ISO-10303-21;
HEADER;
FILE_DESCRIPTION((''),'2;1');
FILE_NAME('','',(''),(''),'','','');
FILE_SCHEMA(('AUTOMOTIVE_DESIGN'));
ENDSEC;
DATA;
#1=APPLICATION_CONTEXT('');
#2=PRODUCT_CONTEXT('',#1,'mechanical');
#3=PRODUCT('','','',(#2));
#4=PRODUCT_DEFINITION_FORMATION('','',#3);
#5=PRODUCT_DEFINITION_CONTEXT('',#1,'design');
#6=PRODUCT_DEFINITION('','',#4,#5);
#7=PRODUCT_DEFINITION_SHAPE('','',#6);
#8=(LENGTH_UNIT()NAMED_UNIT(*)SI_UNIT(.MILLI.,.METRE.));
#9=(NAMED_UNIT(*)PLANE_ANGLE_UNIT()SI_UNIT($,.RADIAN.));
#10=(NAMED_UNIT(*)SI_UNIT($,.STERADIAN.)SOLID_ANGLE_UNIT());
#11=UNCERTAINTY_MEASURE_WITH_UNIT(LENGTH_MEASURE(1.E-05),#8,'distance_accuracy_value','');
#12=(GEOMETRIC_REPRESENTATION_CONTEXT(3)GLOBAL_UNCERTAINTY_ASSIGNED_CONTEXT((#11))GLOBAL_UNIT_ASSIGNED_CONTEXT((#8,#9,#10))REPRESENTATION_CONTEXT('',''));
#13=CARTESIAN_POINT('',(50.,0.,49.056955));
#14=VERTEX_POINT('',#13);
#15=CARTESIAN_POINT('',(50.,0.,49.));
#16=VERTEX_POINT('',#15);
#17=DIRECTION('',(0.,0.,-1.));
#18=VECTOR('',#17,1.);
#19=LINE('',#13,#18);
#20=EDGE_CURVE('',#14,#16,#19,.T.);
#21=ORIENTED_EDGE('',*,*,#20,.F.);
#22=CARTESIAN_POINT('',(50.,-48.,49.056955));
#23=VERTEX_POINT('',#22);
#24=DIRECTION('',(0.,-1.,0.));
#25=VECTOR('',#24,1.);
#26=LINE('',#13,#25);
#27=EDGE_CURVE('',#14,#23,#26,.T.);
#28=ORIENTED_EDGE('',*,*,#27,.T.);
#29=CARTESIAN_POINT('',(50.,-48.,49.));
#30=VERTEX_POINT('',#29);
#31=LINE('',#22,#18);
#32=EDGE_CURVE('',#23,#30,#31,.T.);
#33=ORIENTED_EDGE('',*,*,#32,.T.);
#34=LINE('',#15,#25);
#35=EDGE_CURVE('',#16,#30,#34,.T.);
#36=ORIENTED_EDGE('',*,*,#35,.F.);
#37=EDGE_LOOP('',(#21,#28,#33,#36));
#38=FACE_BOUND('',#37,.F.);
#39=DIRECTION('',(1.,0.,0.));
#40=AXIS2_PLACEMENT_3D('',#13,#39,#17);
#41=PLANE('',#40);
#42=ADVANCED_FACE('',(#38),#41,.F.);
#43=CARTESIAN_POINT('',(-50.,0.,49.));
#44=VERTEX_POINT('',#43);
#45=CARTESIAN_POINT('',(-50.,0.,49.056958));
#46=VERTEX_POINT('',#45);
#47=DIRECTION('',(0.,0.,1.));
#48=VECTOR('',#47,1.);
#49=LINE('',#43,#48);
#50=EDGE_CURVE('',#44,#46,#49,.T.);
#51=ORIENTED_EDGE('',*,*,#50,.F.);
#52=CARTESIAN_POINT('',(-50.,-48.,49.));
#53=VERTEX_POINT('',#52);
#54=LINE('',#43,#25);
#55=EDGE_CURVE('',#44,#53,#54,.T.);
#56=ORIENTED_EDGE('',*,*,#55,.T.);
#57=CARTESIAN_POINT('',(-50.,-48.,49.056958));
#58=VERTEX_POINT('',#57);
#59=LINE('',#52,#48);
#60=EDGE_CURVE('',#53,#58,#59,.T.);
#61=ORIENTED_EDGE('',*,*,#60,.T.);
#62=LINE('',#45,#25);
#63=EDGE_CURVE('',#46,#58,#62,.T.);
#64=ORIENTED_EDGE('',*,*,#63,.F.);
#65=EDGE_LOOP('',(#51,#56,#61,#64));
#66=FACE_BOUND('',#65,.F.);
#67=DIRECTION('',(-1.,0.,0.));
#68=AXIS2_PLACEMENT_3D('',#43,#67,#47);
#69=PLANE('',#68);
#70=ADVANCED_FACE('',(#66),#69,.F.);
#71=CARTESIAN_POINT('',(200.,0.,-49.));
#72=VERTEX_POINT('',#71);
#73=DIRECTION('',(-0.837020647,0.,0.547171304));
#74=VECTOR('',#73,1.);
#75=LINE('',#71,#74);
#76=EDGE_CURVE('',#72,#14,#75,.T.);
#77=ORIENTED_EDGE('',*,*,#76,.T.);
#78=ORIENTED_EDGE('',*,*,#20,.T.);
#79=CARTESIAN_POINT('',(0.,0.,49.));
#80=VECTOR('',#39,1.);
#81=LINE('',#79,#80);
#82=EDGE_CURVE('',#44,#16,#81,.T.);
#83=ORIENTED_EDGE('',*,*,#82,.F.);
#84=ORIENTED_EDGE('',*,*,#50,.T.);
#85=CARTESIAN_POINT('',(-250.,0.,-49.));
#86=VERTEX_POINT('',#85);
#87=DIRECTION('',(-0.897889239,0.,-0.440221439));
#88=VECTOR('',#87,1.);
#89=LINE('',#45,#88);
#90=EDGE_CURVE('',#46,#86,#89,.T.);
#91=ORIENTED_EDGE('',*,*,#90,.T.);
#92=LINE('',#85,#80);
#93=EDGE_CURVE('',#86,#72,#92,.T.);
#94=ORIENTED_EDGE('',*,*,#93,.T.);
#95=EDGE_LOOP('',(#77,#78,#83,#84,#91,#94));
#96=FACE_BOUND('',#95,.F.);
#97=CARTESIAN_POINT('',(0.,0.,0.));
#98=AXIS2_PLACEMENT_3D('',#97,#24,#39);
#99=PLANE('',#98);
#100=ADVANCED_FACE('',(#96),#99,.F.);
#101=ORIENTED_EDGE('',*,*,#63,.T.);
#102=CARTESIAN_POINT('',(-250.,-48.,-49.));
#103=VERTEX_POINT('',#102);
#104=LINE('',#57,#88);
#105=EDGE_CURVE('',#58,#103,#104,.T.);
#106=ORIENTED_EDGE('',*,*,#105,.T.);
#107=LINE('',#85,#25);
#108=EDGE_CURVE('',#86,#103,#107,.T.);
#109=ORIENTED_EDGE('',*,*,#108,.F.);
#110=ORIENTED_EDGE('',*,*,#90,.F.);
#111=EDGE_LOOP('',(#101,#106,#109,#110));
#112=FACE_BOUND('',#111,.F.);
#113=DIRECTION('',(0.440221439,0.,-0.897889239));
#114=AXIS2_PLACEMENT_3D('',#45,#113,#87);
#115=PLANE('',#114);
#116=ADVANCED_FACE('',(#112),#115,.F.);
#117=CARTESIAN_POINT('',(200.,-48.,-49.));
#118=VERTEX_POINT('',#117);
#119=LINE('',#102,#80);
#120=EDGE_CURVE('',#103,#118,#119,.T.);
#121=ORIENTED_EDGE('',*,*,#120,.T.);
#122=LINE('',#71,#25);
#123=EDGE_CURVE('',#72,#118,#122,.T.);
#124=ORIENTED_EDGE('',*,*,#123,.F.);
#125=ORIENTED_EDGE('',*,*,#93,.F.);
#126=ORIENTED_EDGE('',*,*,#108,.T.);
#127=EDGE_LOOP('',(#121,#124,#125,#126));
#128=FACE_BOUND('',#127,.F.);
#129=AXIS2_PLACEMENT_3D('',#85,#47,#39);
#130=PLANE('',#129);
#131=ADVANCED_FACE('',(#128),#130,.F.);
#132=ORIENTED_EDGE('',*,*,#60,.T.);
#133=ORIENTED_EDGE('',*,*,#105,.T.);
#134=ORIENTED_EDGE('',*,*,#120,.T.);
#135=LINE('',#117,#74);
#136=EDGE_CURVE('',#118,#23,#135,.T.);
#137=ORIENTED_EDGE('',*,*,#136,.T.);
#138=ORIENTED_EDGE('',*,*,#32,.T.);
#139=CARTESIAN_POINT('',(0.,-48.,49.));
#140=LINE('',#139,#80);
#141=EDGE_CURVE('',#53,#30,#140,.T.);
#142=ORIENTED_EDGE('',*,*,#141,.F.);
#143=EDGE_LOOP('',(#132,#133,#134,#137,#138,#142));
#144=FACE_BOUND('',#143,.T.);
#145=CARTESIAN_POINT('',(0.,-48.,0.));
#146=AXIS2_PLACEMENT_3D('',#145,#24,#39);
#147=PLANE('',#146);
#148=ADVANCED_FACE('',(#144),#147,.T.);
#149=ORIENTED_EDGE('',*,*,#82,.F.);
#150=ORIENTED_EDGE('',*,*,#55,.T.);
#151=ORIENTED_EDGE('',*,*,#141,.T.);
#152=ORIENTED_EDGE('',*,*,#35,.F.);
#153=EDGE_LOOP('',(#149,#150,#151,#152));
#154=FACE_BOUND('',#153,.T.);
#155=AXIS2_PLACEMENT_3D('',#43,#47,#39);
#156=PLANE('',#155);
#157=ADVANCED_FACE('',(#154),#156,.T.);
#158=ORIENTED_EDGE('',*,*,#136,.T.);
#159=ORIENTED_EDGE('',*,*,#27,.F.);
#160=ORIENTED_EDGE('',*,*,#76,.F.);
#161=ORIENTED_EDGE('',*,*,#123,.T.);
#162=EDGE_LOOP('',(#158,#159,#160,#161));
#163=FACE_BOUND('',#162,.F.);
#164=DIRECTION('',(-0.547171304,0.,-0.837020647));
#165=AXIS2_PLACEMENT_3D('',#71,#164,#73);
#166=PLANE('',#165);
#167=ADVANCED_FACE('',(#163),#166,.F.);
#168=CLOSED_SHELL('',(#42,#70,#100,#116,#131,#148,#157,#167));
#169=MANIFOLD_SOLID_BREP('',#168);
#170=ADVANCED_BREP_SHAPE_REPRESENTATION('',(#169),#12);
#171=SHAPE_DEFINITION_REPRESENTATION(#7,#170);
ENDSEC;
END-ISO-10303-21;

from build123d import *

# Parameters (mm, degrees)
F0_W     = 100
F0_H     = 98
F1_DEPTH = 48


# Not quite as in the source:
# - a feature names something its author has since deleted; it is built from what else it names


with BuildPart() as f1:
    # F0 (on Front) → F1 (new body)
    with BuildSketch(Plane.XZ):
        Rectangle(F0_W, F0_H)
        Polygon((-250, -49), (-50, -49), (-50, 49), (-50, 49.0569584072), align=None)
        Polygon((50, 49), (50, -49), (200, -49), (50, 49.0569546819), align=None)
    extrude(amount=F1_DEPTH)


solid = f1.part
